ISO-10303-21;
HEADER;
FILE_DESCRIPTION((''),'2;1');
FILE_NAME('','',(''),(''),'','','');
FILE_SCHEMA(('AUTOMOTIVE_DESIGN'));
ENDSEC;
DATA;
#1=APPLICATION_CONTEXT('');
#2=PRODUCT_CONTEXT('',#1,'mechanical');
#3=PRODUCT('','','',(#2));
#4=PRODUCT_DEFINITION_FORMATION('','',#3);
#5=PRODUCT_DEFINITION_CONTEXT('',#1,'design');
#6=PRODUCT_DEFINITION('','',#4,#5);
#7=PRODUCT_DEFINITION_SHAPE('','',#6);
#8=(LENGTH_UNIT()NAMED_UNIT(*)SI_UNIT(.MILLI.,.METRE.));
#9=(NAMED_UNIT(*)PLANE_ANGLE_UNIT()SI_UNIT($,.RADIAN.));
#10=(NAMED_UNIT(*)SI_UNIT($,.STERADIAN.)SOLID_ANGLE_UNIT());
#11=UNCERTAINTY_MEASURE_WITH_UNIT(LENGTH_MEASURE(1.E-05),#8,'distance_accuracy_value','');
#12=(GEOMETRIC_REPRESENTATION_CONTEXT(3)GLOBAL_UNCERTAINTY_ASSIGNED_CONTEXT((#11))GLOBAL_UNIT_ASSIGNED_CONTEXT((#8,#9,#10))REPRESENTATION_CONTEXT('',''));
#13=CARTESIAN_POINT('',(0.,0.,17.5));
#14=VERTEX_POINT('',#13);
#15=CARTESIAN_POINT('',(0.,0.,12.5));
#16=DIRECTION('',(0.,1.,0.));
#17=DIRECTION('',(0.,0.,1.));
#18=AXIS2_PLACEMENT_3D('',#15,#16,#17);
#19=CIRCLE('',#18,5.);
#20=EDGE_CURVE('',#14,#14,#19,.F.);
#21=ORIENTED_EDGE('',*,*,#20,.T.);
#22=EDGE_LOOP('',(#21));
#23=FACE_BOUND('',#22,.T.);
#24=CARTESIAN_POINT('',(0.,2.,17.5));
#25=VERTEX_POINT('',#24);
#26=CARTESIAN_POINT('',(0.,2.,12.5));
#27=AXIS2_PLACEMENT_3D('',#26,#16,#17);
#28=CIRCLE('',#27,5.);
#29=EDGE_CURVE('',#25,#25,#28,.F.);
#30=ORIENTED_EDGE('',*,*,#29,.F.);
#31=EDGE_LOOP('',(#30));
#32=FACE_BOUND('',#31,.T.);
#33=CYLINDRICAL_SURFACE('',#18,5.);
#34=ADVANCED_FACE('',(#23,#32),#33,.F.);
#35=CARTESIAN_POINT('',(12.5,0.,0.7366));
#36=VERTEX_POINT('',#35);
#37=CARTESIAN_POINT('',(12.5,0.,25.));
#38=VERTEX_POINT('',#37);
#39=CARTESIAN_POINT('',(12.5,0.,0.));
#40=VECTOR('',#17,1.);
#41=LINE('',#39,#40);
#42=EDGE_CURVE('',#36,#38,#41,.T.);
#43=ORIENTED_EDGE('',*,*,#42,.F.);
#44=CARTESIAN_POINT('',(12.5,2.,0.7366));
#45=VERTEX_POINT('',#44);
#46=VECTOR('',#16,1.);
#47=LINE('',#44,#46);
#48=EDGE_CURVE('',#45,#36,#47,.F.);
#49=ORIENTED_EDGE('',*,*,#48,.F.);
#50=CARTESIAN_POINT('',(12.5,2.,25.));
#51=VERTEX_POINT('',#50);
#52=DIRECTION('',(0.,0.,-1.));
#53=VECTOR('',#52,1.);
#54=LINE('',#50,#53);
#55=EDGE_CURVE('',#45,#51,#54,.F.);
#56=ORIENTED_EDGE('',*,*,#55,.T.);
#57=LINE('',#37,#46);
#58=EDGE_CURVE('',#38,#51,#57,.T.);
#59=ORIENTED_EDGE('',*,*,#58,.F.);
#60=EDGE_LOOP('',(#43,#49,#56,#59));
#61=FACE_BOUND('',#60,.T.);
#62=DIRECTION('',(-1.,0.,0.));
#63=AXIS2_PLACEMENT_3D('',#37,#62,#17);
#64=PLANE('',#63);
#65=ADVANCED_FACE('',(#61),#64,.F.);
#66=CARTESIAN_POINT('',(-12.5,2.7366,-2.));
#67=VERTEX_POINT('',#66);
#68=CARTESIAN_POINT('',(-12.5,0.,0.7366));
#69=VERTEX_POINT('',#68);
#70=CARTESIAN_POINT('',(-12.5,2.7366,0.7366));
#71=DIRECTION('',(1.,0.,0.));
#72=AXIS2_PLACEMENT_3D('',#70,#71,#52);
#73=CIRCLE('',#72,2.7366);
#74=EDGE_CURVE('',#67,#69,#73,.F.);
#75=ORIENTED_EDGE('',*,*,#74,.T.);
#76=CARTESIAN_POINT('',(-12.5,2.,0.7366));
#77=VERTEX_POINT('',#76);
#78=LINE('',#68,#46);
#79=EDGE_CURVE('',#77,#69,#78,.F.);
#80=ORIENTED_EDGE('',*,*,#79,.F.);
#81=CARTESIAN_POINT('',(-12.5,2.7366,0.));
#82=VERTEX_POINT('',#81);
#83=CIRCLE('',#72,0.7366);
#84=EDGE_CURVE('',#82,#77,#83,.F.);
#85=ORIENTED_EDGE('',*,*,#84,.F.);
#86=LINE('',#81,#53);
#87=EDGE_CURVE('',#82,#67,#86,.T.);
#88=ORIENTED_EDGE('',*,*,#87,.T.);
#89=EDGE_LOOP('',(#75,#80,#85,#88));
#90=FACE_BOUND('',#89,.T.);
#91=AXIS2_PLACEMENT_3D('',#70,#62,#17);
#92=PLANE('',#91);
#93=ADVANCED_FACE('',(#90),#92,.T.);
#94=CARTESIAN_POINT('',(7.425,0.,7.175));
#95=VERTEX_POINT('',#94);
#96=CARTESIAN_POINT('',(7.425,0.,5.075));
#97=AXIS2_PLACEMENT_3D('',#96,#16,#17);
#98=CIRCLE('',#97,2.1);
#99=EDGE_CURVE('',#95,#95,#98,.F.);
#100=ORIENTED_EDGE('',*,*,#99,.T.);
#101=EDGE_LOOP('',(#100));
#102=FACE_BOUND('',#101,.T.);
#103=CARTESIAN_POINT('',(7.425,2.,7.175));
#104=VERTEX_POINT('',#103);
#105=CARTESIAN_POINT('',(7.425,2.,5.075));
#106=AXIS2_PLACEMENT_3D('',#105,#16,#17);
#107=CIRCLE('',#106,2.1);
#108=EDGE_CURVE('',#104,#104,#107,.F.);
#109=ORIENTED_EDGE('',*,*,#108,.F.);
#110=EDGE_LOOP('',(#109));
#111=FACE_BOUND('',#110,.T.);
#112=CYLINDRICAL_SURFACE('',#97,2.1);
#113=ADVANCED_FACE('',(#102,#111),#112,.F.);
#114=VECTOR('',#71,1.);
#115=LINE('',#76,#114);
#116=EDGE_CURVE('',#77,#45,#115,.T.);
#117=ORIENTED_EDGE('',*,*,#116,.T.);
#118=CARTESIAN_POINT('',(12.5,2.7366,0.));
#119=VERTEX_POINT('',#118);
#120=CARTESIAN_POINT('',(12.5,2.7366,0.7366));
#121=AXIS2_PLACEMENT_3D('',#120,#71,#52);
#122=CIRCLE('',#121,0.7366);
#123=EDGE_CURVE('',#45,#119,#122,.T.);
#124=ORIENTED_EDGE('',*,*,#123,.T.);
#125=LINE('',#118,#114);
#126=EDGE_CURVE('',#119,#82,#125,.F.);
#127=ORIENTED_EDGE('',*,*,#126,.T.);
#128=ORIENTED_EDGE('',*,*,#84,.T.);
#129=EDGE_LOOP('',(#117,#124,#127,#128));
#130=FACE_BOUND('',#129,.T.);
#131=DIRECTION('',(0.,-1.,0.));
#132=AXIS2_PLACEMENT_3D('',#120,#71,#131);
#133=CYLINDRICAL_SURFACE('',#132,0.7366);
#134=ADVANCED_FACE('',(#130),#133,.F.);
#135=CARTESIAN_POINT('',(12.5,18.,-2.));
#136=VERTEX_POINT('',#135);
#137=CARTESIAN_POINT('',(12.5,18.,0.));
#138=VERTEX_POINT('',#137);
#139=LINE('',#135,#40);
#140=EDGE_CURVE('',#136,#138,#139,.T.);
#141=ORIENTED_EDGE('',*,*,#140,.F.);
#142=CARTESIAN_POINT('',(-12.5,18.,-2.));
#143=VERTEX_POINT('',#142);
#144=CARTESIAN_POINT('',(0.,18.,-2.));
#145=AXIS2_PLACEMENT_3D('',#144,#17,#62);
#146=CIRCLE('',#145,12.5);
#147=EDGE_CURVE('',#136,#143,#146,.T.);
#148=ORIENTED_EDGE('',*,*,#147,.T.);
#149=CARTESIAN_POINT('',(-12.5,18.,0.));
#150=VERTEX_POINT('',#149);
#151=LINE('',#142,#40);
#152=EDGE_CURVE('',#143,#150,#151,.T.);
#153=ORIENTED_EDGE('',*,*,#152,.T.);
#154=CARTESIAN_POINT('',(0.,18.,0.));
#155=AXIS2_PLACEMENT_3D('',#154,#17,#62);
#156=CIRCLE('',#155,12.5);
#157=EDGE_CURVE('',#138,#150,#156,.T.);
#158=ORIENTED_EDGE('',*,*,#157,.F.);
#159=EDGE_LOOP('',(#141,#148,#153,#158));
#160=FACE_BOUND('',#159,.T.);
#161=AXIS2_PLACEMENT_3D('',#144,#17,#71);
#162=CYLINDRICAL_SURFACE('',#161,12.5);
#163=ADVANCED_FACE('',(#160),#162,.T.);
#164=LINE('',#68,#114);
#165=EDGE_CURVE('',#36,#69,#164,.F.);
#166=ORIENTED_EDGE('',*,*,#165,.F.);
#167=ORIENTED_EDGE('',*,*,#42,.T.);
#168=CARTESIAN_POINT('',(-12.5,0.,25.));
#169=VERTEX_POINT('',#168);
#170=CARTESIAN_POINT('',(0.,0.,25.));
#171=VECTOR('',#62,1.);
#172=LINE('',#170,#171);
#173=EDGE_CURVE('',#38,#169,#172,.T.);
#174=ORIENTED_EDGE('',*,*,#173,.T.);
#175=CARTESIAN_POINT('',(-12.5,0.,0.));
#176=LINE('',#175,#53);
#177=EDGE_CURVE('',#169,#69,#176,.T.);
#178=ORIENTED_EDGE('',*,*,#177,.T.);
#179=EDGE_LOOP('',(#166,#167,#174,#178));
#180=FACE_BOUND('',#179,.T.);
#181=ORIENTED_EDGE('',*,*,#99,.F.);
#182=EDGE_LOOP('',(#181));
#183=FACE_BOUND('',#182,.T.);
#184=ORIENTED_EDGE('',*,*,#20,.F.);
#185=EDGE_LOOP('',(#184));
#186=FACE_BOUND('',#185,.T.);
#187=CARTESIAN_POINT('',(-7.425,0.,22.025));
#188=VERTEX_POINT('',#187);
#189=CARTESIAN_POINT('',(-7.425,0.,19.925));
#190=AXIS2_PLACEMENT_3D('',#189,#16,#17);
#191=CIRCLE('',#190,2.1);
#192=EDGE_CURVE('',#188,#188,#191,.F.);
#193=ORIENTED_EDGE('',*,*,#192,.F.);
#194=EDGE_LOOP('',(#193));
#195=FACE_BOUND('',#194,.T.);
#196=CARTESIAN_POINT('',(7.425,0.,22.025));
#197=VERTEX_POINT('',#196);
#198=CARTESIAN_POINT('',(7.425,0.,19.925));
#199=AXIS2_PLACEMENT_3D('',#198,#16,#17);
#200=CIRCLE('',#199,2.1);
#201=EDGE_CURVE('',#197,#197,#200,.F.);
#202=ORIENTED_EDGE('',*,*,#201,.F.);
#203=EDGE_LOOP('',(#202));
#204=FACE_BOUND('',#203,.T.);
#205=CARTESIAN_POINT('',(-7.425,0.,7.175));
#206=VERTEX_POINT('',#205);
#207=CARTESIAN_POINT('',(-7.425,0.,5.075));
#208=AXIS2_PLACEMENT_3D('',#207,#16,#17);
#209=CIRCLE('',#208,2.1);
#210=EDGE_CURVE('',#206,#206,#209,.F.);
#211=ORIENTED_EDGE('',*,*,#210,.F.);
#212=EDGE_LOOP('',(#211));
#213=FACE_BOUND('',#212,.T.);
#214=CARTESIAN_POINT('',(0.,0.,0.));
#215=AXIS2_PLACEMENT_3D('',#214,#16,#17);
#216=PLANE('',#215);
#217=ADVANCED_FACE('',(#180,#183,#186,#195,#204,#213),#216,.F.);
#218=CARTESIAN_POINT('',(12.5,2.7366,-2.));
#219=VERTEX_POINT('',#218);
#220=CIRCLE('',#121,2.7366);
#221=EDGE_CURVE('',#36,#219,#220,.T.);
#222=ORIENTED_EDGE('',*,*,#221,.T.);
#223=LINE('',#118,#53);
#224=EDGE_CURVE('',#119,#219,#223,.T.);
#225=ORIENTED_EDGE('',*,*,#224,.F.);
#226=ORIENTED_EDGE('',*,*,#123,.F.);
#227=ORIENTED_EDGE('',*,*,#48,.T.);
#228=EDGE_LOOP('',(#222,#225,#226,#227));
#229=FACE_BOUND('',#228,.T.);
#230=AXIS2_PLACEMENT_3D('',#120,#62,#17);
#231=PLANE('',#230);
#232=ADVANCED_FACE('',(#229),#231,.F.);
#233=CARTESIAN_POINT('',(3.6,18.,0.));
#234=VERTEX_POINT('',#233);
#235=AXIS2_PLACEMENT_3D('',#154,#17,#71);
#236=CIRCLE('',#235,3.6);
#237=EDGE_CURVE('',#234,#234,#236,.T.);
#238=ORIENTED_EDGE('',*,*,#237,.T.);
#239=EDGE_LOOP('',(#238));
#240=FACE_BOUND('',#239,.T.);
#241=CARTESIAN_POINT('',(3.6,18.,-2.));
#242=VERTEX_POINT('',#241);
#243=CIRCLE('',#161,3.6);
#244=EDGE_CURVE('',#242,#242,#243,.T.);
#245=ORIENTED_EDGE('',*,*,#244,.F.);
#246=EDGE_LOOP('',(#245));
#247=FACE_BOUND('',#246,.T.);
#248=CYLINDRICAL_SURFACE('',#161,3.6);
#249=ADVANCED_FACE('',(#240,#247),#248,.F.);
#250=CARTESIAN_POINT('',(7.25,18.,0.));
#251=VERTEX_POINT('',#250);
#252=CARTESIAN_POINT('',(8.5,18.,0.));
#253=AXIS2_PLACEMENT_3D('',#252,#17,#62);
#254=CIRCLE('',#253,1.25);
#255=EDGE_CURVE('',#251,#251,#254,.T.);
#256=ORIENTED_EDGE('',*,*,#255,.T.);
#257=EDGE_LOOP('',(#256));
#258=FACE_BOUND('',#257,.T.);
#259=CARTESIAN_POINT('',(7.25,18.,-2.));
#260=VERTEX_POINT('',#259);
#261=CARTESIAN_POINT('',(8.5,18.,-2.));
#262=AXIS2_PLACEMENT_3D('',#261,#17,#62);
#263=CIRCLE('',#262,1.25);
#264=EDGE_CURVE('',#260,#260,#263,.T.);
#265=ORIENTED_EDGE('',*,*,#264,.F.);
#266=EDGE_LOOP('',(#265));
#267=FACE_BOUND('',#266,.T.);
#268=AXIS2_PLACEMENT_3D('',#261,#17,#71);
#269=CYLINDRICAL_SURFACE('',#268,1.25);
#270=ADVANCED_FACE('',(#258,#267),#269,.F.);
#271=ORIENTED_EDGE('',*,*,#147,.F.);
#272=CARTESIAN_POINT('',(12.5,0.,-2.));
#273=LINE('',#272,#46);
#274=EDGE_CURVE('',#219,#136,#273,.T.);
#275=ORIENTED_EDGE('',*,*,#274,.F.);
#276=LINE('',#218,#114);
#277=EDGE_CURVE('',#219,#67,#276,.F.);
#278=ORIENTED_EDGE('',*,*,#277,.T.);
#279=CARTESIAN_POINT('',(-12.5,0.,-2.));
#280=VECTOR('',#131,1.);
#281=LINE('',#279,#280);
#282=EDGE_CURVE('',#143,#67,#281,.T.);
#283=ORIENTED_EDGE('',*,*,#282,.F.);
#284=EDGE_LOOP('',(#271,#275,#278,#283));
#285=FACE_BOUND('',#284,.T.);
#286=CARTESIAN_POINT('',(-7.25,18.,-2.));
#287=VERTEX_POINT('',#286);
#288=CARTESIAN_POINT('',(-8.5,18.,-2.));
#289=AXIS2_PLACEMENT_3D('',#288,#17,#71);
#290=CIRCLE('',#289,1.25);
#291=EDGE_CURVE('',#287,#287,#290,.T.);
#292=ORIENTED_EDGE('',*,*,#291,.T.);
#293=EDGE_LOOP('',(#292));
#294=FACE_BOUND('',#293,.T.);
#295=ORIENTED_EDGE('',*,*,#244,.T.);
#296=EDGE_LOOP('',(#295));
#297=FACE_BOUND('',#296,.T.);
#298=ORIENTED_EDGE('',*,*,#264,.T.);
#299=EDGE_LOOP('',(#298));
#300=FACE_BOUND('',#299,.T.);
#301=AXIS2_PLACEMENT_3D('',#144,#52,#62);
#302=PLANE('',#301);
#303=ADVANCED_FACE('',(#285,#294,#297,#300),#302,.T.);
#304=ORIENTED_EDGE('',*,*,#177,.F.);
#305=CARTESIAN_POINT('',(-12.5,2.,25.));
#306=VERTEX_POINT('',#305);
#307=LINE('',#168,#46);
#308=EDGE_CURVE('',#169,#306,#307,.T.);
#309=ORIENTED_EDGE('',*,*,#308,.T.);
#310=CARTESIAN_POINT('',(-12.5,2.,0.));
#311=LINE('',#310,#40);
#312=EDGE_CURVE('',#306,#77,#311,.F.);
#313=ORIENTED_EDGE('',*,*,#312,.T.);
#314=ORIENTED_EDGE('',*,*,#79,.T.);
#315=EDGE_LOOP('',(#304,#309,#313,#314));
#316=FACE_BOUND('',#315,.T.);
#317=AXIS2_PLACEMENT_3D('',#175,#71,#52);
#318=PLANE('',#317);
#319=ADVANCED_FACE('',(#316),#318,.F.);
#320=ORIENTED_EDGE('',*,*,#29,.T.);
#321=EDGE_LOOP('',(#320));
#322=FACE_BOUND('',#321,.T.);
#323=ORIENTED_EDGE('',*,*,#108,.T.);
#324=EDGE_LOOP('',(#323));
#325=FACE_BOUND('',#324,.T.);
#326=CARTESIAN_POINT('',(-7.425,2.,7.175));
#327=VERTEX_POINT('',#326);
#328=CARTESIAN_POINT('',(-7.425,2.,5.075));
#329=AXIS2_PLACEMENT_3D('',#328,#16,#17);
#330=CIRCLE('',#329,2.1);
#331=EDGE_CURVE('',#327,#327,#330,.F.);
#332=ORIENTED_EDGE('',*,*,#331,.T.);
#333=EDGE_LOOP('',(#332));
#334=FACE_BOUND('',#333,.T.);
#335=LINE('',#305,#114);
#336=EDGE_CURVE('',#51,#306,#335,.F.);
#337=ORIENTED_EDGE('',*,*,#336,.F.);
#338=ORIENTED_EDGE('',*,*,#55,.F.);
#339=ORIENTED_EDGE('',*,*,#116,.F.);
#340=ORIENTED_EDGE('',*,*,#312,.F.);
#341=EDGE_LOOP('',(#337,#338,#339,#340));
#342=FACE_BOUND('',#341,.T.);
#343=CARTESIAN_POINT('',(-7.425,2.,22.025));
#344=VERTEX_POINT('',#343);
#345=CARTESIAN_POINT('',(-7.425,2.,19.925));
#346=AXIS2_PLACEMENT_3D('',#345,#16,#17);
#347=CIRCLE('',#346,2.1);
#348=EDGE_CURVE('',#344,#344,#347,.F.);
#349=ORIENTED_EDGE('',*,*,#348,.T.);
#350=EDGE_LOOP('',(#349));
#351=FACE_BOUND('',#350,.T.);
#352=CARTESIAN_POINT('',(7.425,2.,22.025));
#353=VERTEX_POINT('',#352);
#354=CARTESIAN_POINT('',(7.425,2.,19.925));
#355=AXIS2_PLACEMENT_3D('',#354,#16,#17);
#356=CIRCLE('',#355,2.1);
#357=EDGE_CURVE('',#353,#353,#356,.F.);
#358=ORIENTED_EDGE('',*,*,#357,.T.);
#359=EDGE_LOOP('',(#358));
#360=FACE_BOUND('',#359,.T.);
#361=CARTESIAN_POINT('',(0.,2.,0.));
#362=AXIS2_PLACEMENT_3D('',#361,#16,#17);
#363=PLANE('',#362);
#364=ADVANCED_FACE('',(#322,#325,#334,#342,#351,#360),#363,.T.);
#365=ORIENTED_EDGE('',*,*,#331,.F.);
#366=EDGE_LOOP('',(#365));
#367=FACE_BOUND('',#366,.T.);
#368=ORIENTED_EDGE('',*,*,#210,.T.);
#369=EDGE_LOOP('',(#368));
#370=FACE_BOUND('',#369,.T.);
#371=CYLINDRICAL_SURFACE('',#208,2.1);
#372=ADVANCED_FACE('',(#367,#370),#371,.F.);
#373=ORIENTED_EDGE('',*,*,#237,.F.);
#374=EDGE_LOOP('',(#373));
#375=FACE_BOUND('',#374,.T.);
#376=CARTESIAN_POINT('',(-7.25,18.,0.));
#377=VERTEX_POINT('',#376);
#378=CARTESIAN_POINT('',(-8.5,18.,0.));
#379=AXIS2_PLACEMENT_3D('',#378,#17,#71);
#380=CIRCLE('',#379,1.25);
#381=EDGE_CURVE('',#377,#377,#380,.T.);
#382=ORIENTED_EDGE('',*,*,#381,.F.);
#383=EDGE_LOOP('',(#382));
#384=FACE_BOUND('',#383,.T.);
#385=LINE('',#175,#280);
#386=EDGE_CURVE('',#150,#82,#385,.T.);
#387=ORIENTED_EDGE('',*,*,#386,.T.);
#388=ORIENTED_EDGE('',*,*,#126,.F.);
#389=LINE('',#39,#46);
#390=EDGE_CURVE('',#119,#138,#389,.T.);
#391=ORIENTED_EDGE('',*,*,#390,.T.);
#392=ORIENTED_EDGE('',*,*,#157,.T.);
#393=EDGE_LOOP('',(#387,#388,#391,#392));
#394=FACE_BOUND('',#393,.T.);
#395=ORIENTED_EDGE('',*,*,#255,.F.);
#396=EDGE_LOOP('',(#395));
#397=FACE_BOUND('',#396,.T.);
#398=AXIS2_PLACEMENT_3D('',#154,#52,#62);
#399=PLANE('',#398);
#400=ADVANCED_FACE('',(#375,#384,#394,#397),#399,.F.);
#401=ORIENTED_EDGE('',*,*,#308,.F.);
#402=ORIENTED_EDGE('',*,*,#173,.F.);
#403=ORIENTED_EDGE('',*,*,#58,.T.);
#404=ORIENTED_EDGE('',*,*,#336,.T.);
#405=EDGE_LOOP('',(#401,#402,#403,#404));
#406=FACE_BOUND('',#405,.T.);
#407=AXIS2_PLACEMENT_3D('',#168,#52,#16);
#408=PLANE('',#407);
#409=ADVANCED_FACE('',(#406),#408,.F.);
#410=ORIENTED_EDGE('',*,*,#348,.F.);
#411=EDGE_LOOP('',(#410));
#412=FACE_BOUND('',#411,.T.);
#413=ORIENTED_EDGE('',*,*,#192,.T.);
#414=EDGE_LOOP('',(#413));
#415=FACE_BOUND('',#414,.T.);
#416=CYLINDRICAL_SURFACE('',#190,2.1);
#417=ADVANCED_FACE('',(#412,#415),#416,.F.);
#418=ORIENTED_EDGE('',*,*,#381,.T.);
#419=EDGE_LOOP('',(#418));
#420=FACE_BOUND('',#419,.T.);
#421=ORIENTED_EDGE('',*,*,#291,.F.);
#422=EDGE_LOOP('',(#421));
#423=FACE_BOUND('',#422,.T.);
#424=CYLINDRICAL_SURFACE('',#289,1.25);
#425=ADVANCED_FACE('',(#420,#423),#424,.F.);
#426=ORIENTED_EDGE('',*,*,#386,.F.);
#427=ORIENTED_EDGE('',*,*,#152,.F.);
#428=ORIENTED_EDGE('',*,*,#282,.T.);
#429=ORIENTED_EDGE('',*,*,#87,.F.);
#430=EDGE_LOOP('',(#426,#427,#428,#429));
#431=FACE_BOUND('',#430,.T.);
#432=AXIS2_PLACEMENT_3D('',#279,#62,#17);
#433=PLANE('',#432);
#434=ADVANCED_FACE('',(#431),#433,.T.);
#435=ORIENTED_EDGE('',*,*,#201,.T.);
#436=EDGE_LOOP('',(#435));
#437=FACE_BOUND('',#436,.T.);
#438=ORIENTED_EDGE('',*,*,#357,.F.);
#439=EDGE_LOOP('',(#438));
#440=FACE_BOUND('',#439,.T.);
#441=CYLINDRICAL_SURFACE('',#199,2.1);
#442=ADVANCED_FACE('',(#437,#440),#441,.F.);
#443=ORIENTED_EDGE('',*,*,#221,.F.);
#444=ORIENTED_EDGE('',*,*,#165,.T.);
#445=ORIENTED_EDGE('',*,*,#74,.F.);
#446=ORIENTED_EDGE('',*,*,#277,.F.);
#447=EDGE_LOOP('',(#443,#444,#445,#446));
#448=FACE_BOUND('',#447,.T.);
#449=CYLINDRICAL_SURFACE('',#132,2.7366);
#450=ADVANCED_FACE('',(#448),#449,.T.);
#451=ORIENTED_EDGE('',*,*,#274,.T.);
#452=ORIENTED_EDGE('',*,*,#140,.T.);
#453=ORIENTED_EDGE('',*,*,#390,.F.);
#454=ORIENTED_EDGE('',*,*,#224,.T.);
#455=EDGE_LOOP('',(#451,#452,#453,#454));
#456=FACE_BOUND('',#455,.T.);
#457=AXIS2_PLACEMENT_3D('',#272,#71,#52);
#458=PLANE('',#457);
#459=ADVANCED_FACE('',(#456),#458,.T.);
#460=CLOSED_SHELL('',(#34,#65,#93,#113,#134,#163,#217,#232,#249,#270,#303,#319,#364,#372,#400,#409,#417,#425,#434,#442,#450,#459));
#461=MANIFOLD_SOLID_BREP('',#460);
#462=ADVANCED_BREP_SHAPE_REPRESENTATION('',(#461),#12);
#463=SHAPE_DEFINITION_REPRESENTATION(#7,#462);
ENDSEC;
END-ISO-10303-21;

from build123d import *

# Parameters (mm, degrees)
SKETCH_1_R                       = 3.6
SKETCH_1_R_2                     = 1.25
SM_BASE_FLANGE_1_DEPTH           = 2
SM_EDGE_FLANGE_1_STRIP_W         = 9.4732
SM_EDGE_FLANGE_1_STRIP_H         = 2
SM_EDGE_FLANGE_1_STRIP_CUT_DEPTH = 25
SM_EDGE_FLANGE_1_DEPTH           = 25
SM_EDGE_FLANGE_1_PROFILE_W       = 25
SM_EDGE_FLANGE_1_PROFILE_H       = 24.2634
SM_EDGE_FLANGE_1_PROFILE_R       = 2.1
SM_EDGE_FLANGE_1_PROFILE_R_2     = 5
SM_EDGE_FLANGE_1_FLAT_DEPTH      = 2


# Sheet-metal steps are written as plain solids
with BuildPart() as part:
    # Sketch 1 → 基体-法兰1 (new body)
    with BuildSketch(Plane.XY):
        with BuildLine():
            Line((12.5, 0), (-12.5, 0))
            Line((-12.5, 0), (-12.5, 18))
            ThreePointArc((-12.5, 18), (0, 30.5), (12.5, 18))
            Line((12.5, 18), (12.5, 0))
        make_face()
        with Locations((0, 18)):
            Circle(SKETCH_1_R, mode=Mode.SUBTRACT)
        with Locations((-8.5, 18)):
            Circle(SKETCH_1_R_2, mode=Mode.SUBTRACT)
        with Locations(Location((8.5, 18, 0), (0, 0, 180))):
            Circle(SKETCH_1_R_2, mode=Mode.SUBTRACT)
    extrude(amount=-SM_BASE_FLANGE_1_DEPTH)

    # 边线-法兰1 strip (across the edge) → 边线-法兰1 strip cut (cut)
    with BuildSketch(Plane.YZ.offset(-12.5)):
        with Locations((-2, -1)):
            Rectangle(SM_EDGE_FLANGE_1_STRIP_W, SM_EDGE_FLANGE_1_STRIP_H)
    extrude(amount=SM_EDGE_FLANGE_1_STRIP_CUT_DEPTH, mode=Mode.SUBTRACT)

    # 边线-法兰1 bend section (across the edge) → 边线-法兰1 (add)
    with BuildSketch(Plane.YZ.offset(-12.5)):
        with BuildLine():
            Line((0, 0.7366), (2, 0.7366))
            ThreePointArc((2, 0.7366), (2.215745145, 0.215745145), (2.7366, 0))
            Line((2.7366, 0), (2.7366, -2))
            ThreePointArc((2.7366, -2), (0.801531583, -1.198468417), (0, 0.7366))
        make_face()
    extrude(amount=SM_EDGE_FLANGE_1_DEPTH)

    # 边线-法兰1 profile (on flange) → 边线-法兰1 flat (add)
    with BuildSketch(Plane.XZ):
        with Locations((0, 12.8683)):
            Rectangle(SM_EDGE_FLANGE_1_PROFILE_W, SM_EDGE_FLANGE_1_PROFILE_H)
        with Locations((-7.425, 5.075)):
            Circle(SM_EDGE_FLANGE_1_PROFILE_R, mode=Mode.SUBTRACT)
        with Locations((7.425, 5.075)):
            Circle(SM_EDGE_FLANGE_1_PROFILE_R, mode=Mode.SUBTRACT)
        with Locations((-7.425, 19.925)):
            Circle(SM_EDGE_FLANGE_1_PROFILE_R, mode=Mode.SUBTRACT)
        with Locations((0, 12.5)):
            Circle(SM_EDGE_FLANGE_1_PROFILE_R_2, mode=Mode.SUBTRACT)
        with Locations((7.425, 19.925)):
            Circle(SM_EDGE_FLANGE_1_PROFILE_R, mode=Mode.SUBTRACT)
    extrude(amount=-SM_EDGE_FLANGE_1_FLAT_DEPTH)


solid = part.part
